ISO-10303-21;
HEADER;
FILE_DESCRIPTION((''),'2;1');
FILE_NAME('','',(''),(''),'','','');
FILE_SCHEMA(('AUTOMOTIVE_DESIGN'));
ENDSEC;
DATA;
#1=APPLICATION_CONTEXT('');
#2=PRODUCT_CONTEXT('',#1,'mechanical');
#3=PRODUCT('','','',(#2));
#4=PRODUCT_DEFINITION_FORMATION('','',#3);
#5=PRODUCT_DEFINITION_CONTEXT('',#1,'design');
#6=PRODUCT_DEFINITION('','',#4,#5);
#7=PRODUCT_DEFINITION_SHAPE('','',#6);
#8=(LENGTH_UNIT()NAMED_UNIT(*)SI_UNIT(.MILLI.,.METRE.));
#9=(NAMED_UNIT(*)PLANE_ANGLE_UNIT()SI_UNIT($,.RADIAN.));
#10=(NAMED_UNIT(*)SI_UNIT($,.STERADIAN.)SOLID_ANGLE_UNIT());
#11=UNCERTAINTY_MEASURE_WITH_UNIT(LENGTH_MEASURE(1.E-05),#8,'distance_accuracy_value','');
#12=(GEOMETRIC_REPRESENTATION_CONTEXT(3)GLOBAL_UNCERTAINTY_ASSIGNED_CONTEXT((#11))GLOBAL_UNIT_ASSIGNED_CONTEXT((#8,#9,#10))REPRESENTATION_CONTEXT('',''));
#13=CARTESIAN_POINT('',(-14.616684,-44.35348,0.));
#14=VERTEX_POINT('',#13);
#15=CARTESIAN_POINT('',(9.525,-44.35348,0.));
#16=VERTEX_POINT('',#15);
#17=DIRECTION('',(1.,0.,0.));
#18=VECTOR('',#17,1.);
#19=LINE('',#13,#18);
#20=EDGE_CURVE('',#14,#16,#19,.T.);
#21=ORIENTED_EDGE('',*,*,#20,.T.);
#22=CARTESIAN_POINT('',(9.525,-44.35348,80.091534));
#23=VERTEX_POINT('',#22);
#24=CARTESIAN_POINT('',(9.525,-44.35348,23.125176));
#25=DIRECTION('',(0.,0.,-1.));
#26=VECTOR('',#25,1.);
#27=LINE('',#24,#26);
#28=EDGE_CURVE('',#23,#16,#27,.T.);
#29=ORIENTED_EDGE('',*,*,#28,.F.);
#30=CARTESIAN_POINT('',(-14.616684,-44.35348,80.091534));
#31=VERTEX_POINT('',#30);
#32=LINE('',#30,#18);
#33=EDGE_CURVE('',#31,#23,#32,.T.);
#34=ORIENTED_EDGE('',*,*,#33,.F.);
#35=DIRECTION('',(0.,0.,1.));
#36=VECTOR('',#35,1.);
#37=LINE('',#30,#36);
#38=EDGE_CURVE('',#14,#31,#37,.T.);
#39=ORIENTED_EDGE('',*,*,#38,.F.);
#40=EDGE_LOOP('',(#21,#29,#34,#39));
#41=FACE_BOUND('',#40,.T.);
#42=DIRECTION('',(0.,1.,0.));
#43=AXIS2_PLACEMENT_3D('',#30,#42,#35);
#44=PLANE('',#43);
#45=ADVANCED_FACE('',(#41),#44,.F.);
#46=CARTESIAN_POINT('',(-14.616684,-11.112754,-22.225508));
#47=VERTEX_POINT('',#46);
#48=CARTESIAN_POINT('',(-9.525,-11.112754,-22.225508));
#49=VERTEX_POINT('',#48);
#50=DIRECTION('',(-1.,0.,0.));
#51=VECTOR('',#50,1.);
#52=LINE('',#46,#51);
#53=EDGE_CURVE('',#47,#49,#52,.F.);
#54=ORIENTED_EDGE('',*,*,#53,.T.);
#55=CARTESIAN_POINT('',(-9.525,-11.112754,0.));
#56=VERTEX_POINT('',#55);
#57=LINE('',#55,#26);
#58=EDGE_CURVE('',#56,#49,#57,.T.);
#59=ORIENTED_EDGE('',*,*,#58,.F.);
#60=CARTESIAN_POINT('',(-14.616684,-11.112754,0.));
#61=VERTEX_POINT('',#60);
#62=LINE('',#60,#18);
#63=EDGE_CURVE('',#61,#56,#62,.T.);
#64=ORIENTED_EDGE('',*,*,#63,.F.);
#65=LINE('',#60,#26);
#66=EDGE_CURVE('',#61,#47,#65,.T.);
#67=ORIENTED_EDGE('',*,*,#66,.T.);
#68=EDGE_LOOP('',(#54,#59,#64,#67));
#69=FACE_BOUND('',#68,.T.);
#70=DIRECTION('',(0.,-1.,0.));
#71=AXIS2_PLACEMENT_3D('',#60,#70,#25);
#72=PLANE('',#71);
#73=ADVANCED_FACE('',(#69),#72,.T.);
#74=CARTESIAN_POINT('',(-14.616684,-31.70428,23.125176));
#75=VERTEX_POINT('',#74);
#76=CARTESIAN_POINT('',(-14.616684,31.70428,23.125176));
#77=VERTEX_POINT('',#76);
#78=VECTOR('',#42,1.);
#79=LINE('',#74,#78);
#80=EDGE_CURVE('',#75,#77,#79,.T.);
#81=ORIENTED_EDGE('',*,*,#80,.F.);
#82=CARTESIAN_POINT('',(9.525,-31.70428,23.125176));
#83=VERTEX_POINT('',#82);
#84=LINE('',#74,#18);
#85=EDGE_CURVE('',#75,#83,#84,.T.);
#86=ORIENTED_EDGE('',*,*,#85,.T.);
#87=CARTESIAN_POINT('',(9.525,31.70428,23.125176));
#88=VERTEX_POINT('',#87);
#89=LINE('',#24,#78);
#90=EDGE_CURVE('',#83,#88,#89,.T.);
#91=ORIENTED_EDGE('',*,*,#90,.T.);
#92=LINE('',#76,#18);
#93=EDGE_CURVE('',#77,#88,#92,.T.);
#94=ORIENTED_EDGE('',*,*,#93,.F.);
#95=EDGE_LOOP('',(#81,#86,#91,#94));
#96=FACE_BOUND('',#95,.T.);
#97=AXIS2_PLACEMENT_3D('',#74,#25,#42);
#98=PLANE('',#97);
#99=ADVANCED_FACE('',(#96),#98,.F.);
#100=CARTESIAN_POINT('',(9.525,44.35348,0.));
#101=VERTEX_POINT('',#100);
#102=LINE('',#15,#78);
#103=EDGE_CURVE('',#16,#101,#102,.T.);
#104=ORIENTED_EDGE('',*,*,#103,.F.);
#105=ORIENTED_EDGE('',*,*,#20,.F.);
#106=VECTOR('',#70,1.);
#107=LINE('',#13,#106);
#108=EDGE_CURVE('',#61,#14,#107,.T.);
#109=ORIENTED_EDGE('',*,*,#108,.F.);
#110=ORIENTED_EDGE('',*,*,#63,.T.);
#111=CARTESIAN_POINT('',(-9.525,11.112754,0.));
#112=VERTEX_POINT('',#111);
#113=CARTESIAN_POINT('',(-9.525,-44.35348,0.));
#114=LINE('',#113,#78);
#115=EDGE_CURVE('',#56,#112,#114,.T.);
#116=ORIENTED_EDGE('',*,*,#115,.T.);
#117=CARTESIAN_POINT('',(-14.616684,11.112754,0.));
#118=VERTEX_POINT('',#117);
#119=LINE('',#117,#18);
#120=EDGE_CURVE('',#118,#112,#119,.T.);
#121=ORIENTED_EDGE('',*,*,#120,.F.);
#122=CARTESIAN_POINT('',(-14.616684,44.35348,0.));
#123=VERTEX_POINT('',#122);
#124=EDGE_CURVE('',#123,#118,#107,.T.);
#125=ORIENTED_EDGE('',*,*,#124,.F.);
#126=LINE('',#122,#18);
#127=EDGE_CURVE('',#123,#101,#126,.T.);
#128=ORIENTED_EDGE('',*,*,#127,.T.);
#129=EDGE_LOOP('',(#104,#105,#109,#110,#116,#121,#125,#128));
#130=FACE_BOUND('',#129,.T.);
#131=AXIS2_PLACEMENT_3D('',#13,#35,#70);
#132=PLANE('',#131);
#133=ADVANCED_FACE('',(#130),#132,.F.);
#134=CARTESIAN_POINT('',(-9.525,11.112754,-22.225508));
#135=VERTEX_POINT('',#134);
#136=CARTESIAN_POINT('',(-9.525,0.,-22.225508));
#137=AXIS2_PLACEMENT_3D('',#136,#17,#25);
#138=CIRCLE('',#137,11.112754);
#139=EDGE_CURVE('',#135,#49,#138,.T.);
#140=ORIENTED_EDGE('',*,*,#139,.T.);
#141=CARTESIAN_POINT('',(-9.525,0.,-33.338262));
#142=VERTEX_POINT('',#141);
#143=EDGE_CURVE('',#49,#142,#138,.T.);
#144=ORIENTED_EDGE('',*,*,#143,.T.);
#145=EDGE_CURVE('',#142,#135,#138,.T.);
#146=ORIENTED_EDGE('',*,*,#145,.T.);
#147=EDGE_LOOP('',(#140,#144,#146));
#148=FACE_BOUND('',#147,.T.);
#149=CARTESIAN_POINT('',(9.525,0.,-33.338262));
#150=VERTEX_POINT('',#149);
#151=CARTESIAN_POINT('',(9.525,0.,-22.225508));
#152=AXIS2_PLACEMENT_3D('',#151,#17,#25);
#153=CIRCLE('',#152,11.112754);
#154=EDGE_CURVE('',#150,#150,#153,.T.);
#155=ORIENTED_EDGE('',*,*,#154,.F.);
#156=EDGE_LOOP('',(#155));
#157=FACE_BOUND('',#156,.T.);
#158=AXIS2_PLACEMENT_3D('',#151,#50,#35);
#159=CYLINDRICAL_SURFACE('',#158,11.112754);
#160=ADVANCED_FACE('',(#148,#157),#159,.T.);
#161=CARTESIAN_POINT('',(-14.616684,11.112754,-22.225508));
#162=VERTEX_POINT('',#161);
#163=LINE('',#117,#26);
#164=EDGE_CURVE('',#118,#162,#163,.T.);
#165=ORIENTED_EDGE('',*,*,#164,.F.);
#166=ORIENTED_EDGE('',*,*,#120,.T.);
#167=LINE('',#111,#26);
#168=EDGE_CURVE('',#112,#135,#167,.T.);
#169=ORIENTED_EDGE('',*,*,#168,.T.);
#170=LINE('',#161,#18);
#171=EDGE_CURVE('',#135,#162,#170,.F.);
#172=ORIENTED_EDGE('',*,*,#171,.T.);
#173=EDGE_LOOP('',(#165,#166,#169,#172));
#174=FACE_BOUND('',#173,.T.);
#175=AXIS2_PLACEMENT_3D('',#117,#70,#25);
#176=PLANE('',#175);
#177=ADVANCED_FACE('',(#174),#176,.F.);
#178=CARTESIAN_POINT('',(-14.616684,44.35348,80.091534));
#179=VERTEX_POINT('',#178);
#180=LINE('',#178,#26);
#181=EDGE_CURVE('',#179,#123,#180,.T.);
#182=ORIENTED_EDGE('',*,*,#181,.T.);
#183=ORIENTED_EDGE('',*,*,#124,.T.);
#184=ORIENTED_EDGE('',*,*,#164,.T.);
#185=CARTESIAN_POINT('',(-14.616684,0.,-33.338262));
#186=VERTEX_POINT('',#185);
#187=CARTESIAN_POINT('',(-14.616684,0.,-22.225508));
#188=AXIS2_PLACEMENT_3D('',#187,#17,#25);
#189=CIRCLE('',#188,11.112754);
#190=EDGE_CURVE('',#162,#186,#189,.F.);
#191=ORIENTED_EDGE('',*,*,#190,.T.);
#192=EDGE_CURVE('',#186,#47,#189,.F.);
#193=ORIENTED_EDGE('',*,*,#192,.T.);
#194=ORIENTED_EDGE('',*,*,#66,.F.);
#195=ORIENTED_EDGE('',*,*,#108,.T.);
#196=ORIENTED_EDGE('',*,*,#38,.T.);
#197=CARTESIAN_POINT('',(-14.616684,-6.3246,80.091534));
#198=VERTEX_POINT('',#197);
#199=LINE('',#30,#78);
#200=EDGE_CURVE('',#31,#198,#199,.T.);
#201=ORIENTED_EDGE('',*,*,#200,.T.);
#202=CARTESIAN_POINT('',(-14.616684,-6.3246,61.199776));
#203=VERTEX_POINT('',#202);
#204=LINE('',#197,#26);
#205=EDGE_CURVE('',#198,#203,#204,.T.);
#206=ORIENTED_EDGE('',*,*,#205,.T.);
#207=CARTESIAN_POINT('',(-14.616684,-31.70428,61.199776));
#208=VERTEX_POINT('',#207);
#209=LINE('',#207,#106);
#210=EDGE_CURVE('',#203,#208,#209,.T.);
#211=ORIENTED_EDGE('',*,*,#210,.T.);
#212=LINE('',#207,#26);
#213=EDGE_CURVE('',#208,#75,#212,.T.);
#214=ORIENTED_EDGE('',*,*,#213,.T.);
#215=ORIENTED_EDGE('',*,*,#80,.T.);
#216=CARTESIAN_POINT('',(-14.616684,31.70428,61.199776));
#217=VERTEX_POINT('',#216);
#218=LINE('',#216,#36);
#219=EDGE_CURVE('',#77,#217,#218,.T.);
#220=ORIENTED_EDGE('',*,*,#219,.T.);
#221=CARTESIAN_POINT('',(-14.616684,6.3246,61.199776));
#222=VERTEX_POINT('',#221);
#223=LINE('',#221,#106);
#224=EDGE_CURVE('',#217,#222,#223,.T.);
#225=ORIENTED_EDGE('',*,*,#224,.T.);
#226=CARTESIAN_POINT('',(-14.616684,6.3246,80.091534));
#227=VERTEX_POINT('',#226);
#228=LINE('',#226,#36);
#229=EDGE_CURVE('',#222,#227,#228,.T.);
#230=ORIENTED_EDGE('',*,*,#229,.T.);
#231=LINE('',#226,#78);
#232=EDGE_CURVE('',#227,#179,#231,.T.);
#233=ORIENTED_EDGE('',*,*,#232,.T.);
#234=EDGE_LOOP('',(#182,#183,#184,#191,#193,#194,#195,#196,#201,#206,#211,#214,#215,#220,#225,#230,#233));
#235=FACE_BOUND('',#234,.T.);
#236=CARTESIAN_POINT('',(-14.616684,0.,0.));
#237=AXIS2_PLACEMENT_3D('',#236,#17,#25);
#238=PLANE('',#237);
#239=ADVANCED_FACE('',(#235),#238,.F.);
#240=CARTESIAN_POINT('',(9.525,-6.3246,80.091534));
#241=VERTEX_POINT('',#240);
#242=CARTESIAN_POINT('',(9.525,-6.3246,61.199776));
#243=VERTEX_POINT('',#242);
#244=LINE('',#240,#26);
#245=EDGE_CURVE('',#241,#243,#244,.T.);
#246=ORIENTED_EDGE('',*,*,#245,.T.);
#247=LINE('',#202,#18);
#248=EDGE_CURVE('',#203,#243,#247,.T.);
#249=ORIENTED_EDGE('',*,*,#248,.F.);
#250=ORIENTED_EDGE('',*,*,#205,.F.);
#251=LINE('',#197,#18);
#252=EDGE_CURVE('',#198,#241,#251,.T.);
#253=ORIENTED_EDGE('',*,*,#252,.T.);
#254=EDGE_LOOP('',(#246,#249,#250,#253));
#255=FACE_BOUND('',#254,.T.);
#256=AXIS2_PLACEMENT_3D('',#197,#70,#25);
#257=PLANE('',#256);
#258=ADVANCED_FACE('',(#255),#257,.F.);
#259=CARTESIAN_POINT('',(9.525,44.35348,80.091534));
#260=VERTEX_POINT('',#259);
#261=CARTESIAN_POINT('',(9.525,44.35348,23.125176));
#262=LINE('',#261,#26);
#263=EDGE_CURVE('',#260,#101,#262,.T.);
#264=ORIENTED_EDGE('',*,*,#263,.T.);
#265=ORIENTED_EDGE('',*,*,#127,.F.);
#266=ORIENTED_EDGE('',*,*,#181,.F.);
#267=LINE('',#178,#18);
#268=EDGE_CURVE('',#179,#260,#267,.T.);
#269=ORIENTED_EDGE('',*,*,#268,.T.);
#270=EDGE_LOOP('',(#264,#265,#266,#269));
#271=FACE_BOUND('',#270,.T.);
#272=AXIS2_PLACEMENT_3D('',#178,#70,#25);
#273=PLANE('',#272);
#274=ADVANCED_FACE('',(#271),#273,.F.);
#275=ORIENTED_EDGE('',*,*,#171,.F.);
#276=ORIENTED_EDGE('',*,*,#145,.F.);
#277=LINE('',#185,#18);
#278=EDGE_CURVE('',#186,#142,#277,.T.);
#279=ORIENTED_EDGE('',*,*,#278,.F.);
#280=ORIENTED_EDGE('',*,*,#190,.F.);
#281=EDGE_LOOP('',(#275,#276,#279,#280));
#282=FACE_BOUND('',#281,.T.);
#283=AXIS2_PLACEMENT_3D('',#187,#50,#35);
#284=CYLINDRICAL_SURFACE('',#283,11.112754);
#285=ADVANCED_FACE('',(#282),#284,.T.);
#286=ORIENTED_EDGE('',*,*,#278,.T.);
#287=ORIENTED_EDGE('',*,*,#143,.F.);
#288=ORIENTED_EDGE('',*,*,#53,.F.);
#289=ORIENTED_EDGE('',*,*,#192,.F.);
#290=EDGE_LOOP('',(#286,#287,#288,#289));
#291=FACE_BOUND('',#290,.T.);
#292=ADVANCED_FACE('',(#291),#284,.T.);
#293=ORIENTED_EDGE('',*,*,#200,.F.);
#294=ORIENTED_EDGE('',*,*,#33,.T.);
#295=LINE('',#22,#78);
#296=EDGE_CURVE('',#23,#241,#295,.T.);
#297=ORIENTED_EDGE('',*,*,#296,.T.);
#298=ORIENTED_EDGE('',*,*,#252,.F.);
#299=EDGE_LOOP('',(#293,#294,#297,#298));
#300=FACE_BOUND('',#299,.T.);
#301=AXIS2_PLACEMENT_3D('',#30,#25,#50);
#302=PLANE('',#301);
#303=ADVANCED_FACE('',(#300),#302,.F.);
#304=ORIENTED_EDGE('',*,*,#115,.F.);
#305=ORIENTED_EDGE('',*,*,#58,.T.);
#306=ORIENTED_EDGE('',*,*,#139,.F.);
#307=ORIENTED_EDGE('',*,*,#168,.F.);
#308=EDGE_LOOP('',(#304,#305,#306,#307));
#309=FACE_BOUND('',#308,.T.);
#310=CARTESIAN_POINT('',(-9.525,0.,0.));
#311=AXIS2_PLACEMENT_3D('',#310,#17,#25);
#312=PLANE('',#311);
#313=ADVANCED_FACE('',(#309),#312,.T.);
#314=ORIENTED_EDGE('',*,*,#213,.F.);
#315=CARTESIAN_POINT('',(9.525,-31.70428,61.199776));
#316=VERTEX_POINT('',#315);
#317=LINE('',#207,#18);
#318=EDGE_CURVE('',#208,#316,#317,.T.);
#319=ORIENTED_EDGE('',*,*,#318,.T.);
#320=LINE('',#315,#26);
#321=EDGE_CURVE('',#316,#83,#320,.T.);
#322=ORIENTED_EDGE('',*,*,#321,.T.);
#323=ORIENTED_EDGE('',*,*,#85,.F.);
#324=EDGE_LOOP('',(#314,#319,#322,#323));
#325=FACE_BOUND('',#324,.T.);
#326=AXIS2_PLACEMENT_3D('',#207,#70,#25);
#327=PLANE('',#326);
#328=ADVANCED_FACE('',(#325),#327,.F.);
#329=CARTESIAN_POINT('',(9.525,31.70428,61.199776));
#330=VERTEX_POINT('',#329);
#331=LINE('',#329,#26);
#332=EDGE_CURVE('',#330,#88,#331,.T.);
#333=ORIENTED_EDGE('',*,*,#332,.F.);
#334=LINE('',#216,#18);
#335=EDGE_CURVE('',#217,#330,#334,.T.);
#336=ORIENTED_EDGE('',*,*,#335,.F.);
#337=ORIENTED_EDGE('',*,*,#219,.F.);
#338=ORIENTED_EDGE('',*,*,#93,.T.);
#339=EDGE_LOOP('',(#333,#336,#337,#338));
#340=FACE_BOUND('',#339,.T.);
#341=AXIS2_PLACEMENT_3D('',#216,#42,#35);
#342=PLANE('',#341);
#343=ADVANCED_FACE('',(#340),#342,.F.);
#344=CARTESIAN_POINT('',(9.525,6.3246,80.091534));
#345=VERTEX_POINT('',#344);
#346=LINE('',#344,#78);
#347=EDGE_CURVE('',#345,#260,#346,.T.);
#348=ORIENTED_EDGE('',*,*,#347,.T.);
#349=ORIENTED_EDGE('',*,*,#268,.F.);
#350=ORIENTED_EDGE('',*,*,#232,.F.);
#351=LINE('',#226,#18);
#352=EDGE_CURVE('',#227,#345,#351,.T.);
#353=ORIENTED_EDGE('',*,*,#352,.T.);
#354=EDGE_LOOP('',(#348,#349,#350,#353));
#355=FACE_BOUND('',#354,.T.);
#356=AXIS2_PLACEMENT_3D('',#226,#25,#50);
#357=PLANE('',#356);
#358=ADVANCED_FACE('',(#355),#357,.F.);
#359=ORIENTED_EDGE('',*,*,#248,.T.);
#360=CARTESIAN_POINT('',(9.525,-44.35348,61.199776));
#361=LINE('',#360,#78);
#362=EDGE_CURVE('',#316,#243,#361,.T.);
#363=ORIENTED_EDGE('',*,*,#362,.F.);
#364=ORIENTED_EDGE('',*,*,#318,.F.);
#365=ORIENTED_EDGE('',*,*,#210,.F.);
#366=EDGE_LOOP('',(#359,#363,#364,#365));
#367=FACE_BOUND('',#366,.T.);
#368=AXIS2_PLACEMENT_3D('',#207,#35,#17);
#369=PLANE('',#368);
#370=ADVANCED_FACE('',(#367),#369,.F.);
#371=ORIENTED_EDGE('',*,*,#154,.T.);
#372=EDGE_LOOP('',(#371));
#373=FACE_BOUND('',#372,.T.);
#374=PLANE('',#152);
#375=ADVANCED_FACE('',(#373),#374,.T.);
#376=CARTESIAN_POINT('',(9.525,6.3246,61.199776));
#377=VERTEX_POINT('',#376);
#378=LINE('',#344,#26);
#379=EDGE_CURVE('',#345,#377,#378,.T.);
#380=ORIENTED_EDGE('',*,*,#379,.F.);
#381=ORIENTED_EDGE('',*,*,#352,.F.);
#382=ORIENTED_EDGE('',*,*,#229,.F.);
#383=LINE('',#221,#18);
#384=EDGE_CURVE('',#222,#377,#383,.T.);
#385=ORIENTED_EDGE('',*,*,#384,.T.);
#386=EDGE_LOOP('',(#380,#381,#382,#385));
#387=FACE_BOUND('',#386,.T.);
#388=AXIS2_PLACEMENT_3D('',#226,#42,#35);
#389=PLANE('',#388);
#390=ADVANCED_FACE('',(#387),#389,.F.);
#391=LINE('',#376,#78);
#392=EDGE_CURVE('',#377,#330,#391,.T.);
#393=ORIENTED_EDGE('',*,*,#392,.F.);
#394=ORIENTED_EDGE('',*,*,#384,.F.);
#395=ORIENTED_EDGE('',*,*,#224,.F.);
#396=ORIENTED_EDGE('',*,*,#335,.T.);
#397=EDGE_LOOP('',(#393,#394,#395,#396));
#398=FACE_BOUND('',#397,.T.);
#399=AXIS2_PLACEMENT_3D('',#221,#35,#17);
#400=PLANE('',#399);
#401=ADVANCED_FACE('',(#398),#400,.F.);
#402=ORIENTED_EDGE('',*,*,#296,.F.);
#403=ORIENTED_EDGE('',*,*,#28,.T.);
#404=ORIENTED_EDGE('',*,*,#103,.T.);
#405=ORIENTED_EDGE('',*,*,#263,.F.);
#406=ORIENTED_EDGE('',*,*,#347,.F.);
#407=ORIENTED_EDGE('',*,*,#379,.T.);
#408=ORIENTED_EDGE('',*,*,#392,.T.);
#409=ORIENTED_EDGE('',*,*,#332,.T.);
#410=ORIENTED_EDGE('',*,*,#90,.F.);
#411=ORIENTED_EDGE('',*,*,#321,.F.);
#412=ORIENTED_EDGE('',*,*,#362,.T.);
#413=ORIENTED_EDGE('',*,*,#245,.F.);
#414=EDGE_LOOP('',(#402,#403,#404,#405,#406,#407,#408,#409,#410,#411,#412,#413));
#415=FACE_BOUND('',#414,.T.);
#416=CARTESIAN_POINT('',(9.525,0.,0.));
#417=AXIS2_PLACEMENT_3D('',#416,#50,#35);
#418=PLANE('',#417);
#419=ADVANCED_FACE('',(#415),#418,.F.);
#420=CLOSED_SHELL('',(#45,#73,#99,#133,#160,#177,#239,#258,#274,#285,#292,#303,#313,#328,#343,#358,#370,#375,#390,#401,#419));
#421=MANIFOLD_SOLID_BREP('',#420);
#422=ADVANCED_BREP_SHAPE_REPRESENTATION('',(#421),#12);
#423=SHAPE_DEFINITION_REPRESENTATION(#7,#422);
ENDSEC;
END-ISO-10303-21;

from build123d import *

# Parameters (mm, degrees)
SKETCH1_R           = 11.112754
BOSS_EXTRUDE1_DEPTH = 9.525
SKETCH2_W           = 22.225508
SKETCH2_H           = 33.338262
BOSS_EXTRUDE2_DEPTH = 5.091684
FILLET1_R           = 11.112754
FILLET2_R           = 11.112754
SKETCH1_3_W         = 12.6492
SKETCH1_3_H         = 38.0746
BOSS_EXTRUDE3_DEPTH = 9.525
BOSS_EXTRUDE6_DEPTH = 5.091684


with BuildPart() as part:
    # Sketch1 → Boss-Extrude1 (new, symmetric)
    with BuildSketch(Plane.YZ):
        with Locations(Location((0, -22.225508, 0), (0, 0, 90))):
            Circle(SKETCH1_R)
    extrude(amount=BOSS_EXTRUDE1_DEPTH, both=True)

    # Sketch2 → Boss-Extrude2 (add)
    with BuildSketch(Plane(origin=(-9.525, 0, 0), x_dir=(0, -1, 0), z_dir=(-1, 0, 0))):
        with Locations((0, -16.669131)):
            Rectangle(SKETCH2_W, SKETCH2_H)
    extrude(amount=BOSS_EXTRUDE2_DEPTH)

    # Fillet1
    fillet1_edges = [part.edges().sort_by_distance(p)[0] for p in [
        (-12.070842, 11.112754, -33.338262),
    ]]
    fillet(fillet1_edges, radius=FILLET1_R)

    # Fillet2
    fillet2_edges = [part.edges().sort_by_distance(p)[0] for p in [
        (-12.070842, -11.112754, -33.338262),
    ]]
    fillet(fillet2_edges, radius=FILLET2_R - 0.0001)  # a hair under: the kernel refuses the full size



with BuildPart() as body_2:
    # Sketch1<3> → Boss-Extrude3 (new, symmetric)
    with BuildSketch(Plane.YZ):
        with Locations((-38.02888, 42.162476)):
            Rectangle(SKETCH1_3_W, SKETCH1_3_H)
        Polygon((-31.70428, 23.125176), (-44.35348, 23.125176), (-44.35348, 0), (44.35348, 0), (44.35348, 23.125176), (31.70428, 23.125176), align=None)
        Polygon((-44.35348, 80.091534), (-44.35348, 61.199776), (-31.70428, 61.199776), (-6.3246, 61.199776), (-6.3246, 80.091534), align=None)
        with Locations((38.02888, 42.162476)):
            Rectangle(SKETCH1_3_W, SKETCH1_3_H)
        Polygon((6.3246, 61.199776), (31.70428, 61.199776), (44.35348, 61.199776), (44.35348, 80.091534), (6.3246, 80.091534), align=None)
    extrude(amount=BOSS_EXTRUDE3_DEPTH, both=True)


with BuildPart() as part_1:
    add(part.part)

    add(body_2.part)  # Boss-Extrude6 merges body 2
    # Sketch8 → Boss-Extrude6 (add)
    with BuildSketch(Plane(origin=(-9.525, 0, 0), x_dir=(0, -1, 0), z_dir=(-1, 0, 0))):
        Polygon((31.70428, 61.199776), (31.70428, 23.125176), (-31.70428, 23.125176), (-31.70428, 61.199776), (-6.3246, 61.199776), (-6.3246, 80.091534), (-44.35348, 80.091534), (-44.35348, 0), (44.35348, 0), (44.35348, 80.091534), (6.3246, 80.091534), (6.3246, 61.199776), align=None)
    extrude(amount=BOSS_EXTRUDE6_DEPTH)


solid = part_1.part
